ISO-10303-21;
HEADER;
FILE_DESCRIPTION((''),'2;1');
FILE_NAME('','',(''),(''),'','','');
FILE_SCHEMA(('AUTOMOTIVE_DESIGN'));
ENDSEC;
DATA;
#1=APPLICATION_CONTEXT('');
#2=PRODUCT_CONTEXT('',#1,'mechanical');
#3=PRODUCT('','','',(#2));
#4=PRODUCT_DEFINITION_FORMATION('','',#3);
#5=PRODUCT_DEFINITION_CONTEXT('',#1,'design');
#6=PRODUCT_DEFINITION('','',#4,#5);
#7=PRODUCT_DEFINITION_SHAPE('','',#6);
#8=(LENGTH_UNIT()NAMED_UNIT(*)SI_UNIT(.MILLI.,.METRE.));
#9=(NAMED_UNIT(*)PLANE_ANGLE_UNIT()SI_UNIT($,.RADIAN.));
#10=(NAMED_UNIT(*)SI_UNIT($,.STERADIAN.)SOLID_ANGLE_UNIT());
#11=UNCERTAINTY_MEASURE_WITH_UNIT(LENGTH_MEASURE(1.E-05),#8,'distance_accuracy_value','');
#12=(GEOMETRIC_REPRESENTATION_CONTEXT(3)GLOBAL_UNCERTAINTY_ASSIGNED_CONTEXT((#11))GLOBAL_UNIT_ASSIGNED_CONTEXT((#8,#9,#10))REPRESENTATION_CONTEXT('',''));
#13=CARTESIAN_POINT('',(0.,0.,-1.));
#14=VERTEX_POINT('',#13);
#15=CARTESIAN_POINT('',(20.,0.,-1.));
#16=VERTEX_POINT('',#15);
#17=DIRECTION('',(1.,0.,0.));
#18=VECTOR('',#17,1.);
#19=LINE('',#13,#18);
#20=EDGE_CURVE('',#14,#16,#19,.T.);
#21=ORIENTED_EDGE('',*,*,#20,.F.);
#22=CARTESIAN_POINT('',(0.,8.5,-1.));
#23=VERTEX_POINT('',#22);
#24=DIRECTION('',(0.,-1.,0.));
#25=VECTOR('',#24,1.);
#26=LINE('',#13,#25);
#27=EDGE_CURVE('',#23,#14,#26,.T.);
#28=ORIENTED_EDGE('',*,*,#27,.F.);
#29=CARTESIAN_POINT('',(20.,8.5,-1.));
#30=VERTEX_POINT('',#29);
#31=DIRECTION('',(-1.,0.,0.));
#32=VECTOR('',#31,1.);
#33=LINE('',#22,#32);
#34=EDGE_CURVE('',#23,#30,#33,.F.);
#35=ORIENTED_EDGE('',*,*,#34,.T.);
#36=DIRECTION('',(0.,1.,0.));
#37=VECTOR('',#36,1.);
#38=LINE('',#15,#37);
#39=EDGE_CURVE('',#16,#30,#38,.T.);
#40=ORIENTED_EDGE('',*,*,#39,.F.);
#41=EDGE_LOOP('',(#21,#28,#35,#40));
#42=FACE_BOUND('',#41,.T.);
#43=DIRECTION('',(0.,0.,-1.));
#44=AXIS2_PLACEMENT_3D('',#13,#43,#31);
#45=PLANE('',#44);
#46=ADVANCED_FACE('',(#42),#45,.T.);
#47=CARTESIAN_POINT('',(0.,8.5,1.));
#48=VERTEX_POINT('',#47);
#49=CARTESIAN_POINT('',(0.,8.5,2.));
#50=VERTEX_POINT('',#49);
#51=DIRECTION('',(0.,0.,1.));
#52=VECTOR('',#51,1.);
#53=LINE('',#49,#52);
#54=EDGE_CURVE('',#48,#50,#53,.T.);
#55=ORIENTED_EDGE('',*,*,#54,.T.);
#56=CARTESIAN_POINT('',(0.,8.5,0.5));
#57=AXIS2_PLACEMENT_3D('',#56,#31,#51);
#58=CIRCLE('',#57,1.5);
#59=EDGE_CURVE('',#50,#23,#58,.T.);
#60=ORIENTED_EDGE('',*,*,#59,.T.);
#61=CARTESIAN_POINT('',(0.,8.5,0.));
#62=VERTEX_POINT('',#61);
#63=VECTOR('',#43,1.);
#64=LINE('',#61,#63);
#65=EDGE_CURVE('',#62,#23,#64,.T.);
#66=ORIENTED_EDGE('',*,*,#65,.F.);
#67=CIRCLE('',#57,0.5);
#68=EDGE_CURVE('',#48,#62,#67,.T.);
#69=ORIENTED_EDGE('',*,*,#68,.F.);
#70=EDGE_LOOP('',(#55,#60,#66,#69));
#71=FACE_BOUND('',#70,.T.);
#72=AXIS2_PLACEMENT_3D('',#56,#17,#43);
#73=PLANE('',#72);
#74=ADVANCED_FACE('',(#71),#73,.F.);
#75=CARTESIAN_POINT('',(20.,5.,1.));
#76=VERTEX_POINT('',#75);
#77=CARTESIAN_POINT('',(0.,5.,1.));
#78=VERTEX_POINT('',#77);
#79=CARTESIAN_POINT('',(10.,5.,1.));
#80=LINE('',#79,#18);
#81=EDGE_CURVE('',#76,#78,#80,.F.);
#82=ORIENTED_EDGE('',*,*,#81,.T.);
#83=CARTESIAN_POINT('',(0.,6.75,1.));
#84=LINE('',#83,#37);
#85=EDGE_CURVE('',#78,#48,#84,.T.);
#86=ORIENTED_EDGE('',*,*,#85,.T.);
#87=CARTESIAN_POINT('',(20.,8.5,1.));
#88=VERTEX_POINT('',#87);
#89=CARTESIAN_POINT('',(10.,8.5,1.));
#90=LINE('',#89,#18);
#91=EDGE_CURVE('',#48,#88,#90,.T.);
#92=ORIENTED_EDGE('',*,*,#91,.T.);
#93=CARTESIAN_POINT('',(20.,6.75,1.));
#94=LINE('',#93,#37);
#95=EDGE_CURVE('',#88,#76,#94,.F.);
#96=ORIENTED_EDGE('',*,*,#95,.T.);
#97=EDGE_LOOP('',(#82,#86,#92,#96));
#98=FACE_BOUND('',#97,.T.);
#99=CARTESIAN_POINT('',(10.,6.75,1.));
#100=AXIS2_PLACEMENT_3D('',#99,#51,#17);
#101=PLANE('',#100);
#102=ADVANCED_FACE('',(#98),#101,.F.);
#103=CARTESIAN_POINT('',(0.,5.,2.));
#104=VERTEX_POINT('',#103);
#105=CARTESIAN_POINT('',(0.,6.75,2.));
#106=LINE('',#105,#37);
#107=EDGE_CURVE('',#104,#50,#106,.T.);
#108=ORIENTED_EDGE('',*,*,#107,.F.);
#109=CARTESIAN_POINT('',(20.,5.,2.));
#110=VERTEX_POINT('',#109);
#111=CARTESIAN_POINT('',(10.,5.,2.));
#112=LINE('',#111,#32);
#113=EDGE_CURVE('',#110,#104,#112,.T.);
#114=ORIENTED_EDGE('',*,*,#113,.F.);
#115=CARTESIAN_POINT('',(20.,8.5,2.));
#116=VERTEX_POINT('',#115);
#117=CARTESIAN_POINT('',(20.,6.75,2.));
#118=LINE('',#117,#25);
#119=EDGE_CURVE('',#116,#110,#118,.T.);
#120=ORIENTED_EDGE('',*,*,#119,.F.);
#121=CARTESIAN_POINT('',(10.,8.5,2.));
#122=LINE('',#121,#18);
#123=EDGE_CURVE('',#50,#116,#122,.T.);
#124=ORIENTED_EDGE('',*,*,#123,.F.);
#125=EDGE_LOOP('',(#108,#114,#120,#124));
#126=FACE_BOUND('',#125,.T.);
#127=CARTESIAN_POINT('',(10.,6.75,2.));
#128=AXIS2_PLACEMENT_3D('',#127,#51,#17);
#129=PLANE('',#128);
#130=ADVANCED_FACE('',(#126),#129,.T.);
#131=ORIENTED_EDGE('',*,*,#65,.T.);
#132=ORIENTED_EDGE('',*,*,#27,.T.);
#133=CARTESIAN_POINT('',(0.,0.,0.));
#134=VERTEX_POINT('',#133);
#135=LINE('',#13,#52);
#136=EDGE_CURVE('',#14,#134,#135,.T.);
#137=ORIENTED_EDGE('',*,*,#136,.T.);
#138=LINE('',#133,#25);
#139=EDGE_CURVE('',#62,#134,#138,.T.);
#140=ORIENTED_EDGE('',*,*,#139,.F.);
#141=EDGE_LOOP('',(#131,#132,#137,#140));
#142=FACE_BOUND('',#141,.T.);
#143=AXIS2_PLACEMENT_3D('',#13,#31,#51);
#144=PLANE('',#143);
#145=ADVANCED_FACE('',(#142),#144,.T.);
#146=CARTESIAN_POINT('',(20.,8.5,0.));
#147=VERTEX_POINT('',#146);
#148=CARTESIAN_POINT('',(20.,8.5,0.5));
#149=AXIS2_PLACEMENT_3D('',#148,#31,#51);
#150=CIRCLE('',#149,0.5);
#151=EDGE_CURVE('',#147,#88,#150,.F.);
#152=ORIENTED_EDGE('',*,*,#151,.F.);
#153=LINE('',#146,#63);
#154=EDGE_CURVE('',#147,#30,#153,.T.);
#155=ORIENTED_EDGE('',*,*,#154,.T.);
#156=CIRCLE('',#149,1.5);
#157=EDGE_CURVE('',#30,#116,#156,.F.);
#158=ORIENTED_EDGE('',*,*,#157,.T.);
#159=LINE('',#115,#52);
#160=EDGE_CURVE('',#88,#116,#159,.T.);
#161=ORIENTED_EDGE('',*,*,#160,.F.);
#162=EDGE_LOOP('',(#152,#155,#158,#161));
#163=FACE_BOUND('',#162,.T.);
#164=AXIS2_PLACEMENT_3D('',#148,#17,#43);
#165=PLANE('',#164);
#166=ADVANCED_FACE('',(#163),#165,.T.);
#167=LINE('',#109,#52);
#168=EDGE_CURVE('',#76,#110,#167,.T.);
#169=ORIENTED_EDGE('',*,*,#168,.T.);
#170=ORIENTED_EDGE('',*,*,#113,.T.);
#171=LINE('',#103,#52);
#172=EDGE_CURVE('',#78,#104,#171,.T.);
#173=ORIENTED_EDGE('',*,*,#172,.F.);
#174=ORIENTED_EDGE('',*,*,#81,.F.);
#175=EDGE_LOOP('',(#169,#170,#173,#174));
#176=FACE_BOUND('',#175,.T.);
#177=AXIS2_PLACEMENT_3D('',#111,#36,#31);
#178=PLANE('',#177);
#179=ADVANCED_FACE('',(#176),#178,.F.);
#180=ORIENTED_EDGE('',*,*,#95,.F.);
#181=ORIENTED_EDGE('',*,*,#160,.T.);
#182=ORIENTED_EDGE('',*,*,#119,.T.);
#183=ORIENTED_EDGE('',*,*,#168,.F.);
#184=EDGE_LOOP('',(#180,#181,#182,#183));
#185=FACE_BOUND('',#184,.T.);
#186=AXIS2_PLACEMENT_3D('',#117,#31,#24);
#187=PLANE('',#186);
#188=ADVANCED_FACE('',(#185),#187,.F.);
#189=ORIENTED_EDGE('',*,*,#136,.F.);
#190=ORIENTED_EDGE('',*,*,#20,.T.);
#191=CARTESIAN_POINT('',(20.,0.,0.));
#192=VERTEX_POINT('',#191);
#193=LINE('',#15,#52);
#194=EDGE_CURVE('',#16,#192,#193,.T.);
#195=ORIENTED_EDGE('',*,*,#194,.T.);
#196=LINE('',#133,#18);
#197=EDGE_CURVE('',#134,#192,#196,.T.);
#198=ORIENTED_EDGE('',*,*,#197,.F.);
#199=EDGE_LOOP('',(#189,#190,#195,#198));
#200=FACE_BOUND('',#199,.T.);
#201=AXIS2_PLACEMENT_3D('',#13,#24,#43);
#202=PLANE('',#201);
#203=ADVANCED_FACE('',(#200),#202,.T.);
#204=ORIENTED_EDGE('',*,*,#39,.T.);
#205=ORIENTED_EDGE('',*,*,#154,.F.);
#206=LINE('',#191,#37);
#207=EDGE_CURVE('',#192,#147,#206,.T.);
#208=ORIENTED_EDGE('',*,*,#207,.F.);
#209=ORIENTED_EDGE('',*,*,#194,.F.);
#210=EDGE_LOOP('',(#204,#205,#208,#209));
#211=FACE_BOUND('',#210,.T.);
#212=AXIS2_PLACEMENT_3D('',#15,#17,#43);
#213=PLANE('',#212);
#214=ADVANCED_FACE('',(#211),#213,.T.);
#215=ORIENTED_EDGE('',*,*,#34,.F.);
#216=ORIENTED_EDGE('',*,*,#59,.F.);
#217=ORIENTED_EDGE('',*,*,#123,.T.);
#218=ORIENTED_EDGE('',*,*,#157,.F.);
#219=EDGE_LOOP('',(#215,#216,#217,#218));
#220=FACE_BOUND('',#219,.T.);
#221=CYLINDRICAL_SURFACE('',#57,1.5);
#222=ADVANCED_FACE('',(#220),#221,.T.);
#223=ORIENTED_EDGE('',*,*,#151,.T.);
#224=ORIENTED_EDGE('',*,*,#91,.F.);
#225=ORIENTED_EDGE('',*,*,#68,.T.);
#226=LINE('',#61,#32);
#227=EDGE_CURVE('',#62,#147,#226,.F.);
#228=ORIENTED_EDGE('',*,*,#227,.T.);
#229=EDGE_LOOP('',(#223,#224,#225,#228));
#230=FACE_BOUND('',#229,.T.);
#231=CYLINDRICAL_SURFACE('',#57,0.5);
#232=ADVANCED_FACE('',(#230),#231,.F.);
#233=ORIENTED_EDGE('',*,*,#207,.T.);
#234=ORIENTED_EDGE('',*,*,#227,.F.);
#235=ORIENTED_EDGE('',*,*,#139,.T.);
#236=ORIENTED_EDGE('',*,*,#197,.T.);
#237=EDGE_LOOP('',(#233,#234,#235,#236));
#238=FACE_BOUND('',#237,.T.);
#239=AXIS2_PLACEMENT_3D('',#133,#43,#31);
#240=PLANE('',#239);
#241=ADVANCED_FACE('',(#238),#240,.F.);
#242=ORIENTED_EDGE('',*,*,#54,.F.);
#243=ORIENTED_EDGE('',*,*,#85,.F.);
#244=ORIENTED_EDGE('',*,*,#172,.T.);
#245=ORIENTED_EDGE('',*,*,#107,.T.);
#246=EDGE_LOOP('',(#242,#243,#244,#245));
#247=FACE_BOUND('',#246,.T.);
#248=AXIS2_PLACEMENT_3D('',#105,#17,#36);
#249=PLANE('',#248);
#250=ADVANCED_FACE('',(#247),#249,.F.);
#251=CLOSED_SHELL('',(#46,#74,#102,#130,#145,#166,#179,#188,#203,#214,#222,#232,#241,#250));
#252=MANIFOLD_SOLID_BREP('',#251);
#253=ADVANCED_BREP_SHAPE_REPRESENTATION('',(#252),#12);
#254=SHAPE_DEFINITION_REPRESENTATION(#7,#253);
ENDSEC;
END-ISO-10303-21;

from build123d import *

# Parameters (mm, degrees)
SKETCH_1_W       = 20
SKETCH_1_H       = 10
BASEPLATE_DEPTH  = 1
HEM_OPEN_DEPTH   = 20
HEM_OPEN_2_DEPTH = 20


# Read off the part's stored shape, not the designer's step: Hem_open
# Sheet-metal steps are written as plain solids
with BuildPart() as part:
    # Sketch 1 → BasePlate (new body)
    with BuildSketch(Plane.XY):
        with Locations((10, 5)):
            Rectangle(SKETCH_1_W, SKETCH_1_H)
    extrude(amount=-BASEPLATE_DEPTH)

    # Hem_open outline → Hem_open (cut)
    with BuildSketch(Plane.YZ):
        with BuildLine():
            Line((10, 0), (9.914213562, 0))
            ThreePointArc((9.914213562, 0), (9.366025404, -0.724744871), (8.5, -1))
            Line((8.5, -1), (10, -1))
            Line((10, -1), (10, 0))
        make_face()
    extrude(amount=HEM_OPEN_DEPTH, mode=Mode.SUBTRACT)

    # Hem_open 2 outline → Hem_open 2 (add)
    with BuildSketch(Plane.YZ):
        with BuildLine():
            Line((5, 2), (5, 1))
            Line((5, 1), (8.5, 1))
            ThreePointArc((8.5, 1), (9, 0.5), (8.5, 0))
            Line((8.5, 0), (9.914213562, 0))
            ThreePointArc((9.914213562, 0), (9.724744871, 1.366025404), (8.5, 2))
            Line((8.5, 2), (5, 2))
        make_face()
    extrude(amount=HEM_OPEN_2_DEPTH)


solid = part.part
